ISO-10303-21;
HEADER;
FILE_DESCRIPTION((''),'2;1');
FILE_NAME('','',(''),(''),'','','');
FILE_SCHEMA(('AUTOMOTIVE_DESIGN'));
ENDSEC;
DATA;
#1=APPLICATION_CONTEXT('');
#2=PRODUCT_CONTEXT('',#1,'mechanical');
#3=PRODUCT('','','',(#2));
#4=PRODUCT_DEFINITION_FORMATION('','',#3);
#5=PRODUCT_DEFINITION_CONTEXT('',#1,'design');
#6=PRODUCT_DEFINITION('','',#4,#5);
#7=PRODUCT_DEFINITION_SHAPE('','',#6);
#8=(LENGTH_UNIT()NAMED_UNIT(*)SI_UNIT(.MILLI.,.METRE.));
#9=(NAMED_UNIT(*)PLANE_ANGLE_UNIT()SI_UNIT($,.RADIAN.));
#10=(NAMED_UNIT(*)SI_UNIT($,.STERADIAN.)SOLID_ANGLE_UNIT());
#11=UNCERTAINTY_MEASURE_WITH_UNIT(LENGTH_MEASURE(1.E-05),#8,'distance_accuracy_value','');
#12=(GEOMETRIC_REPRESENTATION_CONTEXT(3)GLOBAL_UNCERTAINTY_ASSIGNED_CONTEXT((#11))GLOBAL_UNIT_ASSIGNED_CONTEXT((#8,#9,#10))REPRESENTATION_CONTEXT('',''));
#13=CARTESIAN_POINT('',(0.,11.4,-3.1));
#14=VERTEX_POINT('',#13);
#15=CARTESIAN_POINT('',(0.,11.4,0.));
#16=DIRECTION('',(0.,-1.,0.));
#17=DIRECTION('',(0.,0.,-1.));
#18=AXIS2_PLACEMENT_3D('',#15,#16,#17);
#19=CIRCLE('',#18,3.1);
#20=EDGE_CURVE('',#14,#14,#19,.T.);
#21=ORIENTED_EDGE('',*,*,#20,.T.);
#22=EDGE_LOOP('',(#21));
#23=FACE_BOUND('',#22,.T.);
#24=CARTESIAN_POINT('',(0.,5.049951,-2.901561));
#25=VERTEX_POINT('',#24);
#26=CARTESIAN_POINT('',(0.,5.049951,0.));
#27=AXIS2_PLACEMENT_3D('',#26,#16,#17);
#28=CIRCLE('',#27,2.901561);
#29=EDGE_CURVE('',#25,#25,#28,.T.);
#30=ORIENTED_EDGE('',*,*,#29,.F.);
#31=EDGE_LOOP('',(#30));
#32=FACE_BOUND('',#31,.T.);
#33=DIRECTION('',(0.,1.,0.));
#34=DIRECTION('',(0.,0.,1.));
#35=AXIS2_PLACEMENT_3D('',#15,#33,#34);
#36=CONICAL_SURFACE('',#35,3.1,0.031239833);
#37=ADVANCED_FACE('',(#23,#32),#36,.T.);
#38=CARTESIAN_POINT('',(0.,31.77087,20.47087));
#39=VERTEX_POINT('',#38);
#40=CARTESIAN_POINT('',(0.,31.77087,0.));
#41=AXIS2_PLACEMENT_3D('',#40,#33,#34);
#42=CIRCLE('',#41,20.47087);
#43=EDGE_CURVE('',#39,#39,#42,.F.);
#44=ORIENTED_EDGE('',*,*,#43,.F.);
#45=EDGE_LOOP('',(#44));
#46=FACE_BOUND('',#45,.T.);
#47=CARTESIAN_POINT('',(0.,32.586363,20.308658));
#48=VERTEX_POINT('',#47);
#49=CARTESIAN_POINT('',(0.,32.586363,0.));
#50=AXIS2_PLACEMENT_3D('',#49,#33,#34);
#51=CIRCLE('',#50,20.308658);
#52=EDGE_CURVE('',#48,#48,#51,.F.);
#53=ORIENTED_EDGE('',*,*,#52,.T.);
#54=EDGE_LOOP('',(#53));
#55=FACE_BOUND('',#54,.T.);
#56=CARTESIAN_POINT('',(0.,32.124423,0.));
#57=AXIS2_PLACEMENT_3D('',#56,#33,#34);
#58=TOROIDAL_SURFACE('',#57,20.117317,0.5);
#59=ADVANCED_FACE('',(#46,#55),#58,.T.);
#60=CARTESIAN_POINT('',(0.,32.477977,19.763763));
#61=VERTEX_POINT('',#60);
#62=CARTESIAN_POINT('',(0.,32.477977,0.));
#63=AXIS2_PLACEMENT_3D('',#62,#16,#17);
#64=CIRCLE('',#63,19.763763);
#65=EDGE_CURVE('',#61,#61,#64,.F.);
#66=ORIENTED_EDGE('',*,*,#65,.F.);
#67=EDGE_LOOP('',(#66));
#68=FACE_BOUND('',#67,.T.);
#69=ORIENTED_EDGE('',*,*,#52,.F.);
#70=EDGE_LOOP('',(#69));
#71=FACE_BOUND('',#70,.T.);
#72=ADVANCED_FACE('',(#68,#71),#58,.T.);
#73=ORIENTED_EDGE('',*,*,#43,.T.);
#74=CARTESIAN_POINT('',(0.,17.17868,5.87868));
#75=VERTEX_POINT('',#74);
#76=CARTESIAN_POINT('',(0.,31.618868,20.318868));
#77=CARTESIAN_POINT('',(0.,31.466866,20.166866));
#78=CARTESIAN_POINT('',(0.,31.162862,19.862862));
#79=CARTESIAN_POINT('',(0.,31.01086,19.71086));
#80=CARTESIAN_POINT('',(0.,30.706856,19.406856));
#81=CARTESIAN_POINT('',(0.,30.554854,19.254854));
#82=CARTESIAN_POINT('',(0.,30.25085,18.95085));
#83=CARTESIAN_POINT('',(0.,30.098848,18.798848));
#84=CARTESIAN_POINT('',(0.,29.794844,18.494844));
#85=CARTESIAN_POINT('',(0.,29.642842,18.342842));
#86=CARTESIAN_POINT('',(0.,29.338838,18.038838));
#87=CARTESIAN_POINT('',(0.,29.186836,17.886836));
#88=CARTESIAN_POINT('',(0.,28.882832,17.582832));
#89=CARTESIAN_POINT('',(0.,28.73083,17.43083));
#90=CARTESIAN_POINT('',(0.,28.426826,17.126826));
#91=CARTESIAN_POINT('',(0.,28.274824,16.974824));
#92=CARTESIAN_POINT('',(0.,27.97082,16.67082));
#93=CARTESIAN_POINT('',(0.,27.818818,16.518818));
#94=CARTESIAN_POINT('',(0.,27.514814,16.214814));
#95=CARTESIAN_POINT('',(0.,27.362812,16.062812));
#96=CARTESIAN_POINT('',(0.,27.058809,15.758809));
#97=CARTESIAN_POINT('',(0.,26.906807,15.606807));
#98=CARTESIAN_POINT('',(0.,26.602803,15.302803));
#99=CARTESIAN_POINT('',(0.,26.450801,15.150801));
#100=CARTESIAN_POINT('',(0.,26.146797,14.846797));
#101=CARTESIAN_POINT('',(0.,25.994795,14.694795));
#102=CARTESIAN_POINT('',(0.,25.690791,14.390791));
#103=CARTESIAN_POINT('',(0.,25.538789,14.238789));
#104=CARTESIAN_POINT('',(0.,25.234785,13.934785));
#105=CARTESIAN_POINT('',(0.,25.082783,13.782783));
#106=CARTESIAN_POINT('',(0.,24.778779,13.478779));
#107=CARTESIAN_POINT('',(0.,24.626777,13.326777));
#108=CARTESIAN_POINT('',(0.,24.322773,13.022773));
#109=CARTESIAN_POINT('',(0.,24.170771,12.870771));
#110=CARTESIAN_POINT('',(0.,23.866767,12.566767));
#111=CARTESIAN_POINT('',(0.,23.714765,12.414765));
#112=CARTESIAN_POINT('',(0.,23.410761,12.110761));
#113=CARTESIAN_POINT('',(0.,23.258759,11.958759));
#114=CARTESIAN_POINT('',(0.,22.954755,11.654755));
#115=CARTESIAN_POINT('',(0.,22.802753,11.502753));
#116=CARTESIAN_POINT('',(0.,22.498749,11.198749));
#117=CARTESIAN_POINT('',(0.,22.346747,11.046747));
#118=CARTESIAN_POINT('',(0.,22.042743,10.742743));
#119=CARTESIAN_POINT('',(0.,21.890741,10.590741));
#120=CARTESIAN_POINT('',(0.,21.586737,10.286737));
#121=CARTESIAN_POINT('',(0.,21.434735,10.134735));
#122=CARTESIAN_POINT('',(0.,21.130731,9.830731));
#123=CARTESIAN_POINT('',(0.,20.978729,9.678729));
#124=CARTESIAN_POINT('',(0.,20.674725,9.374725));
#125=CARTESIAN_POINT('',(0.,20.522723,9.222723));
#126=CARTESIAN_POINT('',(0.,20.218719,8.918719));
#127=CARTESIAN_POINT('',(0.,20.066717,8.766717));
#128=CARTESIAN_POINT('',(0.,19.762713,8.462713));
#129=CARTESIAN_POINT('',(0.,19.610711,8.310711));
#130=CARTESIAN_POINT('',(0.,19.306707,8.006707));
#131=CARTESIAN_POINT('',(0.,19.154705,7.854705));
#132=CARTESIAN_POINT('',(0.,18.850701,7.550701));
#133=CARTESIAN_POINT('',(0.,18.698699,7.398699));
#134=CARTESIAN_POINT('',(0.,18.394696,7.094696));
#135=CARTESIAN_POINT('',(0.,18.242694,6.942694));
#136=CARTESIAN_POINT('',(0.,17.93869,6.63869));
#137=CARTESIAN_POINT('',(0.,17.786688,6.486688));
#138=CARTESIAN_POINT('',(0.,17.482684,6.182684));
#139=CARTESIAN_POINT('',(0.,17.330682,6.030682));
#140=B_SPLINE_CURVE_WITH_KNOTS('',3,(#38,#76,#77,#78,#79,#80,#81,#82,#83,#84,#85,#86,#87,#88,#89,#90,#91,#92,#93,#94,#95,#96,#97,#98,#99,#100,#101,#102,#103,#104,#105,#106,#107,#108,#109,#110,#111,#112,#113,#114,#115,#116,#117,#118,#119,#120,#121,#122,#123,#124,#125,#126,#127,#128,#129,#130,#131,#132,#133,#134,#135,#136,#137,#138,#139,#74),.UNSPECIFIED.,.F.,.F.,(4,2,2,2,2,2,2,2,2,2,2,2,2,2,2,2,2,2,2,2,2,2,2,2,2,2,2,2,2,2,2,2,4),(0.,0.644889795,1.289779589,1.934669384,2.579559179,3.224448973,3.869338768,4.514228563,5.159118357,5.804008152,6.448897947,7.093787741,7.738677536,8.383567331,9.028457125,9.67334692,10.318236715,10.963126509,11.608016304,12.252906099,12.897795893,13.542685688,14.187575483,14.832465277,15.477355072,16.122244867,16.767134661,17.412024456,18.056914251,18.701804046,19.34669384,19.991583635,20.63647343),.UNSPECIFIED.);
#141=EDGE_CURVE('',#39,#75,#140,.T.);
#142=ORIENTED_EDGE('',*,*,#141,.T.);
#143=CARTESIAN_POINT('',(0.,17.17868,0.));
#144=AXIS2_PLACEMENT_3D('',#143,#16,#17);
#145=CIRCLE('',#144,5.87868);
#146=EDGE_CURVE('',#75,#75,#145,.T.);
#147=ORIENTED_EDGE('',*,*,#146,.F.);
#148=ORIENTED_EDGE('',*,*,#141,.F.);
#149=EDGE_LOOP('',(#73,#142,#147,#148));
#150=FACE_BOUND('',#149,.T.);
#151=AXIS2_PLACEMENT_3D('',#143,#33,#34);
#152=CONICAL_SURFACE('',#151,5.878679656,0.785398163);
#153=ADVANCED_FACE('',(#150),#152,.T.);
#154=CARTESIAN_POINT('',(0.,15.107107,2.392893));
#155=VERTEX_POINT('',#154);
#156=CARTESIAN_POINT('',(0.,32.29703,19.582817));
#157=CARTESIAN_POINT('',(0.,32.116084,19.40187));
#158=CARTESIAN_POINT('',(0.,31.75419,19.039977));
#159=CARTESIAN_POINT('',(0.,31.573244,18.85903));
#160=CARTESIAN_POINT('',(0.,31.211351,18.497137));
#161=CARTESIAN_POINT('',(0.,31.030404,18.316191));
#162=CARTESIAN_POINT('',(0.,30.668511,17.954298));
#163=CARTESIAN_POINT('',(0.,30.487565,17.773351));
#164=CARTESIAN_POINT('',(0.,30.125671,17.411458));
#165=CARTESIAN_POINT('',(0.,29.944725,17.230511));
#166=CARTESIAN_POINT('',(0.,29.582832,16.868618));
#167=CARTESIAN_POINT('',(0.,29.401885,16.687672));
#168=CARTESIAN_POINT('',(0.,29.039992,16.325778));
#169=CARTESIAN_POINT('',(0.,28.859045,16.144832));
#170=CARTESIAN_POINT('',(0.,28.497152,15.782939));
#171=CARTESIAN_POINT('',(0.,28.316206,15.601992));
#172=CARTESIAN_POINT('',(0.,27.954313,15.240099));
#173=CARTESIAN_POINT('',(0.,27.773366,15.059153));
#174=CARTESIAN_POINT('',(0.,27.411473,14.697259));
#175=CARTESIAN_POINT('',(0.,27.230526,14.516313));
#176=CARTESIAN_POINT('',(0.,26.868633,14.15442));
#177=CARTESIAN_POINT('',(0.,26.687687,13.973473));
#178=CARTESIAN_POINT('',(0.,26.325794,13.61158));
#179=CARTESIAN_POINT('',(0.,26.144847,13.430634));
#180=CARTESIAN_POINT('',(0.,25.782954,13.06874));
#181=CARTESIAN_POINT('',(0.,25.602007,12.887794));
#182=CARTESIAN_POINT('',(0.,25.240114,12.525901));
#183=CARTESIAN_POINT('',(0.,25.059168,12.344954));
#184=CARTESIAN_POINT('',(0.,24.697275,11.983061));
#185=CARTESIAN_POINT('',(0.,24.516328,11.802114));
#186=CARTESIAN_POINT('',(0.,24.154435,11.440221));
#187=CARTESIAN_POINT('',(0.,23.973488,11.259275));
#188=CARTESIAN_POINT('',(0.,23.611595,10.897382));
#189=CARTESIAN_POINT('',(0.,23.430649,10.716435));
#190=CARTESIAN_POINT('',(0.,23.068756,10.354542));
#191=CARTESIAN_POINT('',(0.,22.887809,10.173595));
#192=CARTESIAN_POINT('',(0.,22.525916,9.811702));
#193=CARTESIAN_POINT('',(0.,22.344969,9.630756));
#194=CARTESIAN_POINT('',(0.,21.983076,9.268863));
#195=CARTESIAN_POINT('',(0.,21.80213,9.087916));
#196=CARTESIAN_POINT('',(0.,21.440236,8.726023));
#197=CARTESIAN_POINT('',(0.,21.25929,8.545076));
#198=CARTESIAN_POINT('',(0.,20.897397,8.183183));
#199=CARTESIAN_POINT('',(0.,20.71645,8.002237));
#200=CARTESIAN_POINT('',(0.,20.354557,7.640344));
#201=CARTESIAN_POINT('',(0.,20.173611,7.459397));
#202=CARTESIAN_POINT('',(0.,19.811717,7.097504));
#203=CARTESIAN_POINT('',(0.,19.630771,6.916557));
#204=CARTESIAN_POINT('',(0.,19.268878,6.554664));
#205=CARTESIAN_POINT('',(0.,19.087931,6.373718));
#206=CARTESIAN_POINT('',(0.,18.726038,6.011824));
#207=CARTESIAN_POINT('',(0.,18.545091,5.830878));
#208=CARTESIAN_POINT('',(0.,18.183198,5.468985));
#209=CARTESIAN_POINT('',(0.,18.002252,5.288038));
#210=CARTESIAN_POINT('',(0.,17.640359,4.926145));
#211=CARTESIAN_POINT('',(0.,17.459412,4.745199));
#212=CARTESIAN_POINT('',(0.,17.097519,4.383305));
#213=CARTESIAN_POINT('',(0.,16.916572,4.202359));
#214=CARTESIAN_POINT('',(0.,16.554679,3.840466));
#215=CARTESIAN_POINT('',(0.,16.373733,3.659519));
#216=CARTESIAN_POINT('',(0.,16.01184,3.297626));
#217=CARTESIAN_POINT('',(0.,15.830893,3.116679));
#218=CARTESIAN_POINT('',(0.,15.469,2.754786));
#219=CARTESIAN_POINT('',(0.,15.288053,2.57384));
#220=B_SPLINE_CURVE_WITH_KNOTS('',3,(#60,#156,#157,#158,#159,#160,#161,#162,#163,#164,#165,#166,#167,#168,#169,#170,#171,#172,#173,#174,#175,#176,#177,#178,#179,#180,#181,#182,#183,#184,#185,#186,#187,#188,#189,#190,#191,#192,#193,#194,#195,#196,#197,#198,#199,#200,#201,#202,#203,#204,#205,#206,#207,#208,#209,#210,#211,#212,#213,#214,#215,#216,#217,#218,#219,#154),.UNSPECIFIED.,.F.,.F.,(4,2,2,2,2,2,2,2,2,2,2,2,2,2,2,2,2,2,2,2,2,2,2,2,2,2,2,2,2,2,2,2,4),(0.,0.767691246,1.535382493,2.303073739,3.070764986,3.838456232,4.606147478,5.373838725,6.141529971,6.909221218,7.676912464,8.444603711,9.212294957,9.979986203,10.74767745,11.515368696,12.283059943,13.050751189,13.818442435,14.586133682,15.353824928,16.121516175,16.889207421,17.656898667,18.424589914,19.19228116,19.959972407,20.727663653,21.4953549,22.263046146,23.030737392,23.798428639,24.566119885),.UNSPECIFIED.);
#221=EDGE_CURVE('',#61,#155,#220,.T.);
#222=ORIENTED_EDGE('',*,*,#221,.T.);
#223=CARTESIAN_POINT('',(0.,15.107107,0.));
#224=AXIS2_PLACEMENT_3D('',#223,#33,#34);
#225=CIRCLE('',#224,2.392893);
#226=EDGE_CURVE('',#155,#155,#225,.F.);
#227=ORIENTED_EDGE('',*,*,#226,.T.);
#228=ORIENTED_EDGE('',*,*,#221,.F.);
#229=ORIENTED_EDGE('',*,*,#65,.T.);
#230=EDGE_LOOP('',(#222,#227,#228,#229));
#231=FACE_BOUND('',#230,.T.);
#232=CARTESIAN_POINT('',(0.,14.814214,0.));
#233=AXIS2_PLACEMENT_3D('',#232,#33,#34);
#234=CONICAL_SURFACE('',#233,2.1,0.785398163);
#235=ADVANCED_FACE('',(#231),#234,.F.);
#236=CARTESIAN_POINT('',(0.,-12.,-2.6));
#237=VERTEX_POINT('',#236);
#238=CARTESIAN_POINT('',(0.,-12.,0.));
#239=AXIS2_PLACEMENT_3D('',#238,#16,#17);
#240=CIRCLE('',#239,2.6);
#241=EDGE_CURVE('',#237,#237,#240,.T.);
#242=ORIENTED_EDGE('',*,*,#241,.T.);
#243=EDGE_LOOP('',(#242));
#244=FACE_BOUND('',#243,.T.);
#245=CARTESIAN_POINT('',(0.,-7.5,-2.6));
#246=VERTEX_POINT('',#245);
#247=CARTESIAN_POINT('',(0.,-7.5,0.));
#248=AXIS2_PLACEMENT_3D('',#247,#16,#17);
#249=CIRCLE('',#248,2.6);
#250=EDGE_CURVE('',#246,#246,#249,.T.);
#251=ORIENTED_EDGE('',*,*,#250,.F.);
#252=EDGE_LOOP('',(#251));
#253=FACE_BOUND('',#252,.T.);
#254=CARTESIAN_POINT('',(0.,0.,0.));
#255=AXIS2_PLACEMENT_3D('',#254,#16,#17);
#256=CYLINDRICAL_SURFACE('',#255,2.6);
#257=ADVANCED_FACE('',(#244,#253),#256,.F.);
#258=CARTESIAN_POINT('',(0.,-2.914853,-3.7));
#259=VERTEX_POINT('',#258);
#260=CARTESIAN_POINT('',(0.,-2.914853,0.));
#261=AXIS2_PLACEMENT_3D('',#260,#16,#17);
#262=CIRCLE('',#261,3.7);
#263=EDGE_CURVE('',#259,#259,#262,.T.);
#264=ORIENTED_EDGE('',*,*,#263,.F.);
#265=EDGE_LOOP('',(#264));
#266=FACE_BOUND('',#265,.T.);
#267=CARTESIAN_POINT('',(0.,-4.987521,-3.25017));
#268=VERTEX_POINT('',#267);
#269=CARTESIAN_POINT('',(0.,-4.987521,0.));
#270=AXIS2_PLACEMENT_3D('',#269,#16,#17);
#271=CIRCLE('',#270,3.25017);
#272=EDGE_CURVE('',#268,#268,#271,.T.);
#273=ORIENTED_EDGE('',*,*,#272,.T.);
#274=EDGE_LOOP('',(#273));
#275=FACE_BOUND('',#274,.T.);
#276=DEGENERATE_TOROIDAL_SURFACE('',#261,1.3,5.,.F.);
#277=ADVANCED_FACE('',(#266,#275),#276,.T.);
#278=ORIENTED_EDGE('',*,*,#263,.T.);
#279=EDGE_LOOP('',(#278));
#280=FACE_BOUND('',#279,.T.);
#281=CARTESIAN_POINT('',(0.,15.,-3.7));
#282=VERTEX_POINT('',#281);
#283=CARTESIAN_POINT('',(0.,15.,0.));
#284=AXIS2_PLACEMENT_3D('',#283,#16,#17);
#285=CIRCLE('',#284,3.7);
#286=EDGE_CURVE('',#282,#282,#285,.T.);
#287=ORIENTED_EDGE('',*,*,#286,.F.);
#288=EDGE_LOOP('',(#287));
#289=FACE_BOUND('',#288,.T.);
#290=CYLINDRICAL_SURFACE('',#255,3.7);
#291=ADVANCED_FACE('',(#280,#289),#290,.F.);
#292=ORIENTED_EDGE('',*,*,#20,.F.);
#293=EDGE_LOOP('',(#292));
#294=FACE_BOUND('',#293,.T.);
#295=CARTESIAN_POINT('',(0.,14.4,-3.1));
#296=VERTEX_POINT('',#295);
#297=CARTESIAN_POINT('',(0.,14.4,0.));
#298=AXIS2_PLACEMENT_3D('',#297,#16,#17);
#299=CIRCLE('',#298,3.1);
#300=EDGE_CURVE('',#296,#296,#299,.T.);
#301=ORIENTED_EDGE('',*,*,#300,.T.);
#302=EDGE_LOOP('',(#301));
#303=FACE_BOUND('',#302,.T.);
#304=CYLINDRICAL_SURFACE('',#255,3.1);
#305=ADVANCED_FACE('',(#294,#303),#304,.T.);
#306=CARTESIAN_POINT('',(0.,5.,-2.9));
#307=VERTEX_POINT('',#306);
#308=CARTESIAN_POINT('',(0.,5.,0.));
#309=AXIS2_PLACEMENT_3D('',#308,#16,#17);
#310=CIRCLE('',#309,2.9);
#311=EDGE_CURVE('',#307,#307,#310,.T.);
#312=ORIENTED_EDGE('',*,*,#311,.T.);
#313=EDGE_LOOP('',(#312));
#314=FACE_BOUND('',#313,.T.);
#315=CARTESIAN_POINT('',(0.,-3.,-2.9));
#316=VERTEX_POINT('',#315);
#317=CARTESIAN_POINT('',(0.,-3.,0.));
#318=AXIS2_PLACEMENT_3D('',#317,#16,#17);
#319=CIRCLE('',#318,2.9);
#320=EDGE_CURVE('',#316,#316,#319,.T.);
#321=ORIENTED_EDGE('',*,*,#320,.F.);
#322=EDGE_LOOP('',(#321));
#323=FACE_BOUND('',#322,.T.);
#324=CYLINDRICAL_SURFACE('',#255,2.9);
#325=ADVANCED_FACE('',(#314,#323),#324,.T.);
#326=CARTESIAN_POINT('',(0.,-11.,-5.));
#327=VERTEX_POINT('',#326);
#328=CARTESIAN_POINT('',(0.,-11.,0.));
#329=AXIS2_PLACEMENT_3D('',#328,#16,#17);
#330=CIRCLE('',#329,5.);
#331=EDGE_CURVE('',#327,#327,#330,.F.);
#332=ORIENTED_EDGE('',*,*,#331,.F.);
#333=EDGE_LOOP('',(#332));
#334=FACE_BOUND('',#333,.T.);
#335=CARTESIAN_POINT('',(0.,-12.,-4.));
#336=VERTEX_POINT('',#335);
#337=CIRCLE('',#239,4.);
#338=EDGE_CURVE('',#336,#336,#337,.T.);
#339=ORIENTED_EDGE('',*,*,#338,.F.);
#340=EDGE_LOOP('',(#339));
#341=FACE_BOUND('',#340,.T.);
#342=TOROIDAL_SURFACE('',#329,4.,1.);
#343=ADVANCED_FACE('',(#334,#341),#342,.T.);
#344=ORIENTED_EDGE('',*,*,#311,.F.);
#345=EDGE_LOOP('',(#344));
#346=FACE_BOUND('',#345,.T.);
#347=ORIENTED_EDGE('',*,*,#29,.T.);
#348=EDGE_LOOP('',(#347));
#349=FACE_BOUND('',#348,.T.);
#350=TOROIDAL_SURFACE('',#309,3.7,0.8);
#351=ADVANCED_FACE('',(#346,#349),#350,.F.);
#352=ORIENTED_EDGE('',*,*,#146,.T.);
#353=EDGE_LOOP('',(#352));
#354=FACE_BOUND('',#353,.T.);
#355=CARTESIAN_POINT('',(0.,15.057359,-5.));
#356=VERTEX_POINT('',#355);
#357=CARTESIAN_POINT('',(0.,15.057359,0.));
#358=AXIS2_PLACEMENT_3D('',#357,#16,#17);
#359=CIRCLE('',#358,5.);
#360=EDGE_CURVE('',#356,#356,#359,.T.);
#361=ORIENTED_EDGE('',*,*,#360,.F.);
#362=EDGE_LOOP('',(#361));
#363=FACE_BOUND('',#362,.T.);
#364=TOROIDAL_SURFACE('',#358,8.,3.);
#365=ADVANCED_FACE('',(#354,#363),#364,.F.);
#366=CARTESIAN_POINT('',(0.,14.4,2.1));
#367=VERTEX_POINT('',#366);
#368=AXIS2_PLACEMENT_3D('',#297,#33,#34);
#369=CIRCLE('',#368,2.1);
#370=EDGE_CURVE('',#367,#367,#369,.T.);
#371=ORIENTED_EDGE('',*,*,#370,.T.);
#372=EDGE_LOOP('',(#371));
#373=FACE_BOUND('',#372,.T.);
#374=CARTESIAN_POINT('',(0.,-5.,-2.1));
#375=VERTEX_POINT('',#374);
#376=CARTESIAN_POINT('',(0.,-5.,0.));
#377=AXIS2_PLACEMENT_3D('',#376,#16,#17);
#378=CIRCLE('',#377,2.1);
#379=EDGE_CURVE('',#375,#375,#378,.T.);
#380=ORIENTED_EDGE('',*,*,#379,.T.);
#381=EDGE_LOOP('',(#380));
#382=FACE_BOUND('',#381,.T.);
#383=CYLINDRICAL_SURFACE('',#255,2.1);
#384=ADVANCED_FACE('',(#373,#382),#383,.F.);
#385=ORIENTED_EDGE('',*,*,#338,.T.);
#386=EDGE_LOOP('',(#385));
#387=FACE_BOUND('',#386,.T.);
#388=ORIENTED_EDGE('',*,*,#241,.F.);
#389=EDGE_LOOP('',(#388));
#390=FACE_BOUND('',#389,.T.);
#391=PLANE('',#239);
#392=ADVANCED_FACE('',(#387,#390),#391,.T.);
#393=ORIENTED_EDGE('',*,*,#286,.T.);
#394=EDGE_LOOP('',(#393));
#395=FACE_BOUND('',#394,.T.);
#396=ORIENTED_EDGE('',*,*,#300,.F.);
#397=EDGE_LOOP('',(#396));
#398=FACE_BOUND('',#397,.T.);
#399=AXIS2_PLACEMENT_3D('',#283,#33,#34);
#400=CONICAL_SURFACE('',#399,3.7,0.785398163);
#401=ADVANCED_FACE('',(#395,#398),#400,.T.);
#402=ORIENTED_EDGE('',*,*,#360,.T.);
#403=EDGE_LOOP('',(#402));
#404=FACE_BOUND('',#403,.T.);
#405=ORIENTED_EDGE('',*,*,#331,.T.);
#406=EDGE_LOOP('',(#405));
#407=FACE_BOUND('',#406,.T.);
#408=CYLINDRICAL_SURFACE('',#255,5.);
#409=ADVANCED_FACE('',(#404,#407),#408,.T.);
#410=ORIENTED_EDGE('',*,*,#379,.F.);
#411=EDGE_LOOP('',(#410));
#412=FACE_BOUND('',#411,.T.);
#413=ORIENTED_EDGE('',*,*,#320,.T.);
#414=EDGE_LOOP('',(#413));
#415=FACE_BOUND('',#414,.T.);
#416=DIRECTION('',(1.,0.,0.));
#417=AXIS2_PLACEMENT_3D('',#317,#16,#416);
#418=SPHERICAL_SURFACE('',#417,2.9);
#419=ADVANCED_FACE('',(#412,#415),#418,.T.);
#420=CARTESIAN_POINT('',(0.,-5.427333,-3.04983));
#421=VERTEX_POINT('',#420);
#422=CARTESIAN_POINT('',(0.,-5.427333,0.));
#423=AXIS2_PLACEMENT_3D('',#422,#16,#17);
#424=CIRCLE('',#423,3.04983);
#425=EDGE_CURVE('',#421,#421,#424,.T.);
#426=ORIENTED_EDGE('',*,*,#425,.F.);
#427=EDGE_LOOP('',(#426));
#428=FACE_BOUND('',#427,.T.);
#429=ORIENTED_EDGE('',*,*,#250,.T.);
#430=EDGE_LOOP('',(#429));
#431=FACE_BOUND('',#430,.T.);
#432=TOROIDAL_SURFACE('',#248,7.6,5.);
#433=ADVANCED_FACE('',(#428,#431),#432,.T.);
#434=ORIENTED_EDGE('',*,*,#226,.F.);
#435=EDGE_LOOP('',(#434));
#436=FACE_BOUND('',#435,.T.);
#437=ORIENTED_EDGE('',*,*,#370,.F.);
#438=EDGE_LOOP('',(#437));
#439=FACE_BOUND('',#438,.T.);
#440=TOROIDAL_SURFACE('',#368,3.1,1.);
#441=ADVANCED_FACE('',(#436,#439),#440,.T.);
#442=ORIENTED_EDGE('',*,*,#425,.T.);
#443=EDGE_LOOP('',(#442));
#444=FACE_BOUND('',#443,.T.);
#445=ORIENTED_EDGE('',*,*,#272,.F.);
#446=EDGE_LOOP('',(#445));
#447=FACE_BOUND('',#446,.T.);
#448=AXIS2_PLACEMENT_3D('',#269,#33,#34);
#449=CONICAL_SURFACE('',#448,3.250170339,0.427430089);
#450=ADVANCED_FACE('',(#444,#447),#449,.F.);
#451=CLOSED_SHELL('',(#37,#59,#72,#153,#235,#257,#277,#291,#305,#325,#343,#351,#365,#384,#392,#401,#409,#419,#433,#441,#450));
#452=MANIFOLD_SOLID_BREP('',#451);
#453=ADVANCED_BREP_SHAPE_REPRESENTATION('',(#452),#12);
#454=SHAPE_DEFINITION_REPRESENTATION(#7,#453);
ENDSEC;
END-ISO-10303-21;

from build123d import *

# Parameters (mm, degrees)
SKETCH_2_W   = 1.3
SKETCH_2_H   = 0.6
SKETCH_2_H_2 = 5
SKETCH_2_H_3 = 0.8
FILLET_2_R   = 1
FILLET_3_R   = 1
FILLET_4_R   = 0.5


with BuildPart() as part:
    # Эскиз2 → Повернуть8 (revolve)
    with BuildSketch(Plane.XY, mode=Mode.PRIVATE) as revolve_8_sk:
        with BuildLine():
            Line((2.1, 14.814213562), (2.1, 14.4))
            Line((2.1, 14.4), (3.1, 14.4))
            Line((3.1, 14.4), (3.7, 15))
            Line((3.7, 15), (3.7, 11.4))
            Line((3.7, 11.4), (5, 11.4))
            Line((5, 11.4), (5, 15.057359313))
            ThreePointArc((5, 15.057359313), (5.228361402, 16.20540961), (5.878679656, 17.178679656))
            Line((5.878679656, 17.178679656), (21, 32.3))
            Line((21, 32.3), (20, 32.714213562))
            Line((20, 32.714213562), (2.1, 14.814213562))
        make_face()
        with BuildLine():
            Line((2.1, 14.4), (2.1, 0))
            Line((2.1, 0), (2.1, -5))
            ThreePointArc((2.1, -5), (2.692582404, -4.077032961), (2.9, -3))
            Line((2.9, -3), (2.9, 0))
            Line((2.9, 0), (2.9, 5))
            ThreePointArc((2.9, 5), (2.900390339, 5.024987802), (2.901560976, 5.04995122))
            Line((2.901560976, 5.04995122), (3.1, 11.4))
            Line((3.1, 11.4), (3.1, 14.4))
            Line((3.1, 14.4), (2.1, 14.4))
        make_face()
        with Locations((4.35, 11.1)):
            Rectangle(SKETCH_2_W, SKETCH_2_H)
        with Locations((4.35, 8.3)):
            Rectangle(SKETCH_2_W, SKETCH_2_H_2)
        with Locations((4.35, 5.4)):
            Rectangle(SKETCH_2_W, SKETCH_2_H_3)
        with BuildLine():
            ThreePointArc((3.250170339, -4.987520547), (3.586248648, -3.975312617), (3.7, -2.91485321))
            Line((3.7, -2.91485321), (3.7, 0))
            Line((3.7, 0), (3.7, 5))
            Line((3.7, 5), (5, 5))
            Line((5, 5), (5, 0))
            Line((5, 0), (5, -12))
            Line((5, -12), (2.6, -12))
            Line((2.6, -12), (2.6, -7.5))
            ThreePointArc((2.6, -7.5), (2.713751352, -6.439540593), (3.049829661, -5.427332663))
            Line((3.049829661, -5.427332663), (3.250170339, -4.987520547))
        make_face()
    revolve(revolve_8_sk.sketch.rotate(Axis((0, 0, 0), (0, 1, 0)), 90), axis=Axis((0, 0, 0), (0, 1, 0)))

    # Скругление2
    fillet_2_edges = [part.edges().sort_by_distance(p)[0] for p in [
        (0, -12, 5),
    ]]
    fillet(fillet_2_edges, radius=FILLET_2_R)

    # Скругление3
    fillet_3_edges = [part.edges().sort_by_distance(p)[0] for p in [
        (0, 14.814213562, 2.1),
    ]]
    fillet(fillet_3_edges, radius=FILLET_3_R)

    # Скругление4
    fillet_4_edges = [part.edges().sort_by_distance(p)[0] for p in [
        (0, 32.714213562, 20),
        (0, 32.3, 21),
    ]]
    fillet(fillet_4_edges, radius=FILLET_4_R - 0.0001)  # a hair under: the kernel refuses the full size


solid = part.part
